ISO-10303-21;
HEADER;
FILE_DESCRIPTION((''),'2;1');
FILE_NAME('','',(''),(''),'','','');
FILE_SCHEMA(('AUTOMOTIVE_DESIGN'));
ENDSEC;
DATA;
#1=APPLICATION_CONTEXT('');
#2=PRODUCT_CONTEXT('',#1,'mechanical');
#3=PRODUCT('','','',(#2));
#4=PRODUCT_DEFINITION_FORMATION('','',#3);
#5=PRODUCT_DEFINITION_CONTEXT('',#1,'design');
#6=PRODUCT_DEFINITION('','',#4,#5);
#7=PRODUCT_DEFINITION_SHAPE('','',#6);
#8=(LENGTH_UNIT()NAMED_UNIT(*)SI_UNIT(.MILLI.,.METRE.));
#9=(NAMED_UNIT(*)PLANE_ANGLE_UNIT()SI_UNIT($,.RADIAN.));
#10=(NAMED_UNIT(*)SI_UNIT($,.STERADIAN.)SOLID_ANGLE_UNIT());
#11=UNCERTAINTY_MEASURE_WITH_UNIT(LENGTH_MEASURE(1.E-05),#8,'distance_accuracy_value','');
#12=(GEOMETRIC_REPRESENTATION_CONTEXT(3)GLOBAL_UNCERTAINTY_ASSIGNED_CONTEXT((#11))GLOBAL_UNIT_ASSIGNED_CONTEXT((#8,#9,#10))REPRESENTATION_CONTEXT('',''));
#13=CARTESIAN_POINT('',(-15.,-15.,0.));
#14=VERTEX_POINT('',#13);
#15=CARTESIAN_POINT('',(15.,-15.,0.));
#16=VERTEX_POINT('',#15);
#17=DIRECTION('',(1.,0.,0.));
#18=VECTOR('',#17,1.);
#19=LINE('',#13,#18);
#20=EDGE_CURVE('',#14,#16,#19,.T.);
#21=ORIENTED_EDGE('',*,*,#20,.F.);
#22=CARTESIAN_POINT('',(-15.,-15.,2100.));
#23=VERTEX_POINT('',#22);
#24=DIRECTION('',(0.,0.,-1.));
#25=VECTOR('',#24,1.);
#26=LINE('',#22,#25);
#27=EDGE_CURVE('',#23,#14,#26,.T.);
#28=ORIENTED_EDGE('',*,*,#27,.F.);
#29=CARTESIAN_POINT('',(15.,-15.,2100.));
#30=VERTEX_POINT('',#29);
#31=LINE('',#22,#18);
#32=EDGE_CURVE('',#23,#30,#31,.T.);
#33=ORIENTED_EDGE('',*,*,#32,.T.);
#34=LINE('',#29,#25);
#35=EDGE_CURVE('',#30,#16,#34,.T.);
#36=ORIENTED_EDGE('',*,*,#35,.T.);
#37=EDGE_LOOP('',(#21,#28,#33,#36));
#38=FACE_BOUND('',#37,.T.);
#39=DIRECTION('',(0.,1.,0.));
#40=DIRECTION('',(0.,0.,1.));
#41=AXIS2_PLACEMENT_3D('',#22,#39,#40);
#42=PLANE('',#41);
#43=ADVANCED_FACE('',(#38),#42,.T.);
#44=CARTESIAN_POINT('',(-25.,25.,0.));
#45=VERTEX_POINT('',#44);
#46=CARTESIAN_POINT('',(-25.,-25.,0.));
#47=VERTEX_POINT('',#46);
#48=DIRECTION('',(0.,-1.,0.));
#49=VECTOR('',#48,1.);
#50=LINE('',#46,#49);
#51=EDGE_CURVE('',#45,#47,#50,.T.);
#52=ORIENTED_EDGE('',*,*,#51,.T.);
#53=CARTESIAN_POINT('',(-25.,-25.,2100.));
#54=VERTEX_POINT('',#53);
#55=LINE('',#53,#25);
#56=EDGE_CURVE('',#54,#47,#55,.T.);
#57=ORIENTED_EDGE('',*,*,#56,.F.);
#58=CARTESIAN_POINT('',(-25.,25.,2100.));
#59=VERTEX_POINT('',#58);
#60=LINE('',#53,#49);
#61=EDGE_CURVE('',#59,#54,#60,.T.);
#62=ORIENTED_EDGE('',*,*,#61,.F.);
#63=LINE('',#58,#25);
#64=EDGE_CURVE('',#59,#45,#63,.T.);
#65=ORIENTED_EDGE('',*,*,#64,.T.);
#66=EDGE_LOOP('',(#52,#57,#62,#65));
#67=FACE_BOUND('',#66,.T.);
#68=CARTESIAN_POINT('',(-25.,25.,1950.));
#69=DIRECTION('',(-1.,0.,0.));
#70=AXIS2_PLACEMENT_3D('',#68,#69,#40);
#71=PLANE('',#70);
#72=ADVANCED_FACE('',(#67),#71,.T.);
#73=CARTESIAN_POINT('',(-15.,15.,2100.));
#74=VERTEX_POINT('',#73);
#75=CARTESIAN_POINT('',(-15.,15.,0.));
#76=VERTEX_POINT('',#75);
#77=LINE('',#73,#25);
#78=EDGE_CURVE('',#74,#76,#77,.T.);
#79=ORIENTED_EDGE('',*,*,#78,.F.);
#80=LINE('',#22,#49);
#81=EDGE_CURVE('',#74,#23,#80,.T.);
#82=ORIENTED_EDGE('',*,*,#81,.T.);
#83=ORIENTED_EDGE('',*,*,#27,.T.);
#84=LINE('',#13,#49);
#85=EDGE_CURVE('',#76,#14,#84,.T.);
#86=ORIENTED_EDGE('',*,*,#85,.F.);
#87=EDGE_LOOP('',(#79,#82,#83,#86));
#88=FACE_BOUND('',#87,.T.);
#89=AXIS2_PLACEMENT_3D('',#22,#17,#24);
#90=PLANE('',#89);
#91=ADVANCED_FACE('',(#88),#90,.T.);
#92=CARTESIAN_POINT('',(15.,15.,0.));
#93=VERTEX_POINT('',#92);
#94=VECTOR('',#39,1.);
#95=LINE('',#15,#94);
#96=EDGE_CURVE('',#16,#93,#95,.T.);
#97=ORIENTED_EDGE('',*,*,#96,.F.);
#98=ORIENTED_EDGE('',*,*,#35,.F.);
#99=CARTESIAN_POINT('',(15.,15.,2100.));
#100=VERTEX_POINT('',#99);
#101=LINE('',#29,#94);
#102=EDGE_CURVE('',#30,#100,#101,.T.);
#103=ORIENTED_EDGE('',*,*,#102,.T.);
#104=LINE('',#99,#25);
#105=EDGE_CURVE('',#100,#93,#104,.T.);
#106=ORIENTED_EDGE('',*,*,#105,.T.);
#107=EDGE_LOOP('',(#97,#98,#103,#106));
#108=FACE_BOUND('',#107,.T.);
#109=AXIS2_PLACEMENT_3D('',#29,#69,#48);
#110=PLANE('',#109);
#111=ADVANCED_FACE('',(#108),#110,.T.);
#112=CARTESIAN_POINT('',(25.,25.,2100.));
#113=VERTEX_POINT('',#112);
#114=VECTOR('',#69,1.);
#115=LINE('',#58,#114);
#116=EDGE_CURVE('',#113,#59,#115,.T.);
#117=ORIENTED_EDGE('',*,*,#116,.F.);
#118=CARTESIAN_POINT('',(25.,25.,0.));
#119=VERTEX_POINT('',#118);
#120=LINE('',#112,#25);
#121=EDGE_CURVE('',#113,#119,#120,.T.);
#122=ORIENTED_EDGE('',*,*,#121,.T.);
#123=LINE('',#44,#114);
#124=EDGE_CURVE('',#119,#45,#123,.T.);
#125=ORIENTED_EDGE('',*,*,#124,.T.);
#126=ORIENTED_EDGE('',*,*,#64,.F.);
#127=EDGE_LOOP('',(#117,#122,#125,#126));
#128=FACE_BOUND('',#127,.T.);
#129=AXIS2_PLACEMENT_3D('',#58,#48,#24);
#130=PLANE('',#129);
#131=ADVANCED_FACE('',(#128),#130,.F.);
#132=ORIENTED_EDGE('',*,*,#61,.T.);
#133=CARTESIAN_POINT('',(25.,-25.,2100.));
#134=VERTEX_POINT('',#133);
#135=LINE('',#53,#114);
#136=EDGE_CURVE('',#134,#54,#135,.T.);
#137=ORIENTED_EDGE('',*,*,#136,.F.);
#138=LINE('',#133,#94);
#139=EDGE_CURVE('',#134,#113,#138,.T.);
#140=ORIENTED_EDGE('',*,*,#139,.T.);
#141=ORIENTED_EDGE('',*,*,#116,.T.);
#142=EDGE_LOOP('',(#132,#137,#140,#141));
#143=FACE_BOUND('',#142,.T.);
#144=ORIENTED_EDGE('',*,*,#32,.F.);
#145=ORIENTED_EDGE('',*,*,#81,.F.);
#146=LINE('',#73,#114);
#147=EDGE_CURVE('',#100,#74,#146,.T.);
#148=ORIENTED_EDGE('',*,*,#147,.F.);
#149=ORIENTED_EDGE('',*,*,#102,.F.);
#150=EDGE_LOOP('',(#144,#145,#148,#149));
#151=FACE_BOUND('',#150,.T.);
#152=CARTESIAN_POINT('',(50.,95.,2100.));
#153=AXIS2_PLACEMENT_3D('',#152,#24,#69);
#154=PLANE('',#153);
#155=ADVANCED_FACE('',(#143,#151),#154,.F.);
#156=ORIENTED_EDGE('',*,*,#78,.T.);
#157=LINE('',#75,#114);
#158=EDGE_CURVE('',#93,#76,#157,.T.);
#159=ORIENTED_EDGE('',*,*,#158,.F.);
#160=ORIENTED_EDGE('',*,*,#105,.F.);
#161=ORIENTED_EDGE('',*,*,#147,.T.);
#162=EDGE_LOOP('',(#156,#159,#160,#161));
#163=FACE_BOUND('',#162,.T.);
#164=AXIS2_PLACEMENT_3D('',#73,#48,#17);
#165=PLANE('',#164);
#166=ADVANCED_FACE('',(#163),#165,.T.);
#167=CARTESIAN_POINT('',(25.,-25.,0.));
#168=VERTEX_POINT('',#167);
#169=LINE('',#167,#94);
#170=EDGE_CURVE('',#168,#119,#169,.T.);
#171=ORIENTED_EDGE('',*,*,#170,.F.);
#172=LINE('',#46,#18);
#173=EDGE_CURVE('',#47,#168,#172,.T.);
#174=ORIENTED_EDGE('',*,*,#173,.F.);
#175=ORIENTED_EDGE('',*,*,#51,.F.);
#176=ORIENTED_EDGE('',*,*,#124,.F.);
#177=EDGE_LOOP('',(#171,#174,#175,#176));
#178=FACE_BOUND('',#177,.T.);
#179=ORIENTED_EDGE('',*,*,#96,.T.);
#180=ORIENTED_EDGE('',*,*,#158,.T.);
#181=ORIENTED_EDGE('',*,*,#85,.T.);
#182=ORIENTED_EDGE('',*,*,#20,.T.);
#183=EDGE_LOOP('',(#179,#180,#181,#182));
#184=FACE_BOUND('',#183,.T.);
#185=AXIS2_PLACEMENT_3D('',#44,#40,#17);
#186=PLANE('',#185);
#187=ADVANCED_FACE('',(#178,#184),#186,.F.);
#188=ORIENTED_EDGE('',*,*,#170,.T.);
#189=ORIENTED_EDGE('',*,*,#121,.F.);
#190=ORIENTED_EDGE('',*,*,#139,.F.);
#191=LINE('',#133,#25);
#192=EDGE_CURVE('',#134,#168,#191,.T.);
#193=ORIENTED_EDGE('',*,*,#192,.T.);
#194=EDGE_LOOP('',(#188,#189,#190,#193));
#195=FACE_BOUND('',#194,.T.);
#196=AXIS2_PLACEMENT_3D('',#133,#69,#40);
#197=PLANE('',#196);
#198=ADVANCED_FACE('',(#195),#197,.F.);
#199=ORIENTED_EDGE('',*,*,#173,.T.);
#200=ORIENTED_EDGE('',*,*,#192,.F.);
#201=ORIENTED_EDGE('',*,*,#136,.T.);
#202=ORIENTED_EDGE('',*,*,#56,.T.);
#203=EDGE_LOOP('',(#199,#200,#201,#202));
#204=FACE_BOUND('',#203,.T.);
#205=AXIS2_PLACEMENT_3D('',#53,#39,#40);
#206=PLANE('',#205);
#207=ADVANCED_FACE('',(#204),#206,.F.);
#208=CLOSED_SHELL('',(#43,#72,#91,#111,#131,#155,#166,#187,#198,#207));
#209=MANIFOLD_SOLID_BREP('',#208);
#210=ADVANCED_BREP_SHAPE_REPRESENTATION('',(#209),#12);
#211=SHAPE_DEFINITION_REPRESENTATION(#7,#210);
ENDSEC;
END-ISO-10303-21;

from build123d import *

# Parameters (mm, degrees)
SKETCH1_W                 = 50
SKETCH1_H                 = 50
SKETCH1_W_2               = 30
SKETCH1_H_2               = 30
BOSS_EXTRUDE1_DEPTH       = 2100
SKETCH2_W                 = 50
SKETCH2_H                 = 50
BOSS_EXTRUDE2_DEPTH       = 5100
SKETCH4_W                 = 50
SKETCH4_H                 = 50
SKETCH4_W_2               = 30
SKETCH4_H_2               = 30
BOSS_EXTRUDE3_DEPTH       = 2100
SKETCH5_W                 = 50
SKETCH5_H                 = 50
BOSS_EXTRUDE4_DEPTH       = 1800
LPATTERN1_COUNT           = 2
LPATTERN1_PITCH           = 2000
SKETCH6_W                 = 100
SKETCH6_H                 = 150
BOSS_EXTRUDE5_DEPTH       = 5
SKETCH7_W                 = 100
SKETCH7_H                 = 150
BOSS_EXTRUDE6_DEPTH       = 5
SKETCH8_W                 = 100
SKETCH8_H                 = 150
BOSS_EXTRUDE7_DEPTH       = 5
SKETCH9_W                 = 100
SKETCH9_H                 = 150
BOSS_EXTRUDE8_DEPTH       = 5
SKETCH10_W                = 100
SKETCH10_H                = 5
BOSS_EXTRUDE9_DEPTH       = 20
SKETCH11_W                = 100
SKETCH11_H                = 5
BOSS_EXTRUDE10_DEPTH      = 20
SKETCH12_W                = 100
SKETCH12_H                = 5
BOSS_EXTRUDE11_DEPTH      = 20
SKETCH13_W                = 100
SKETCH13_H                = 5
BOSS_EXTRUDE12_DEPTH      = 20
F_5_0MM_DOWEL_HOLE1_D     = 5
F_5_0MM_DOWEL_HOLE1_DEPTH = 20
F_5_0MM_DOWEL_HOLE1_TIP   = 1.502151548
F_5_0MM_DOWEL_HOLE2_D     = 5
F_5_0MM_DOWEL_HOLE2_DEPTH = 20
F_5_0MM_DOWEL_HOLE2_TIP   = 1.502151548
F_5_0MM_DOWEL_HOLE3_D     = 5
F_5_0MM_DOWEL_HOLE3_DEPTH = 20
F_5_0MM_DOWEL_HOLE3_TIP   = 1.502151548
F_5_0MM_DOWEL_HOLE4_D     = 5
F_5_0MM_DOWEL_HOLE4_DEPTH = 20
F_5_0MM_DOWEL_HOLE4_TIP   = 1.502151548
SKETCH26_W                = 5305.980467783
SKETCH26_H                = 67.779411833
CUT_EXTRUDE1_DEPTH        = 5613.586302232
SPLIT1_OUTLINE_W          = 5150
SPLIT1_OUTLINE_H          = 50
SPLIT1_OUTLINE_W_2        = 30
SPLIT1_OUTLINE_H_2        = 30
SPLIT1_DEPTH              = 2100
SPLIT1_START              = -5
SPLIT1_2_OUTLINE_W        = 100
SPLIT1_2_OUTLINE_H        = 120
SPLIT1_2_OUTLINE_R        = 2.5
SPLIT1_2_DEPTH            = 2110
SPLIT3_START              = -5
SPLIT3_OUTLINE_W          = 100
SPLIT3_OUTLINE_H          = 120
SPLIT3_OUTLINE_R          = 2.5
SPLIT3_DEPTH              = 5
SPLIT4_START              = 2100
SPLIT4_OUTLINE_W          = 100
SPLIT4_OUTLINE_H          = 120
SPLIT4_OUTLINE_R          = 2.5
SPLIT4_DEPTH              = 5


# Read off the part's stored shape, not the designer's step: Split1, Split3, Split4
with BuildPart() as part:
    # Sketch1 → Boss-Extrude1 (new body)
    with BuildSketch(Plane.XY):
        Rectangle(SKETCH1_W, SKETCH1_H)
        Rectangle(SKETCH1_W_2, SKETCH1_H_2, mode=Mode.SUBTRACT)
    extrude(amount=BOSS_EXTRUDE1_DEPTH)

    # Sketch2 → Boss-Extrude2 (add)
    with BuildSketch(Plane.ZY.offset(25)):
        with Locations((125, 0)):
            Rectangle(SKETCH2_W, SKETCH2_H)
        with Locations((1975, 0)):
            Rectangle(SKETCH2_W, SKETCH2_H)
    extrude(amount=BOSS_EXTRUDE2_DEPTH)

    # Sketch4 → Boss-Extrude3 (add)
    with BuildSketch(Plane.XY):
        with Locations((-5150, 0)):
            Rectangle(SKETCH4_W, SKETCH4_H)
        with Locations((-5150, 0)):
            Rectangle(SKETCH4_W_2, SKETCH4_H_2, mode=Mode.SUBTRACT)
    extrude(amount=BOSS_EXTRUDE3_DEPTH)

    # Sketch5 → Boss-Extrude4 (add)
    with BuildSketch(Plane(origin=(0, 0, 1950), x_dir=(-1, 0, 0), z_dir=(0, 0, -1))):
        with Locations((1550, 0)):
            Rectangle(SKETCH5_W, SKETCH5_H)
    boss_extrude4 = extrude(amount=BOSS_EXTRUDE4_DEPTH)

    # LPattern1: Boss-Extrude4 ×2
    with Locations(*[(-i * LPATTERN1_PITCH, 0, 0) for i in range(1, LPATTERN1_COUNT)]):
        add(boss_extrude4)

    # Sketch6 → Boss-Extrude5 (add)
    with BuildSketch(Plane(origin=(0, 0, 0), x_dir=(-1, 0, 0), z_dir=(0, 0, -1))):
        Rectangle(SKETCH6_W, SKETCH6_H)
    extrude(amount=BOSS_EXTRUDE5_DEPTH)

    # Sketch7 → Boss-Extrude6 (add)
    with BuildSketch(Plane(origin=(0, 0, 0), x_dir=(-1, 0, 0), z_dir=(0, 0, -1))):
        with Locations((5150, 0)):
            Rectangle(SKETCH7_W, SKETCH7_H)
    extrude(amount=BOSS_EXTRUDE6_DEPTH)

    # Sketch8 → Boss-Extrude7 (add)
    with BuildSketch(Plane.XY.offset(2100)):
        with Locations((-5150, 0)):
            Rectangle(SKETCH8_W, SKETCH8_H)
    extrude(amount=BOSS_EXTRUDE7_DEPTH)

    # Sketch9 → Boss-Extrude8 (add)
    with BuildSketch(Plane.XY.offset(2100)):
        Rectangle(SKETCH9_W, SKETCH9_H)
    extrude(amount=BOSS_EXTRUDE8_DEPTH)

    # Sketch10 → Boss-Extrude9 (add)
    with BuildSketch(Plane(origin=(0, 75, 0), x_dir=(1, 0, 0), z_dir=(0, 1, 0))):
        with Locations((0, -2102.5)):
            Rectangle(SKETCH10_W, SKETCH10_H)
    extrude(amount=BOSS_EXTRUDE9_DEPTH)

    # Sketch11 → Boss-Extrude10 (add)
    with BuildSketch(Plane(origin=(0, 75, 0), x_dir=(1, 0, 0), z_dir=(0, 1, 0))):
        with Locations((0, 2.5)):
            Rectangle(SKETCH11_W, SKETCH11_H)
    extrude(amount=BOSS_EXTRUDE10_DEPTH)

    # Sketch12 → Boss-Extrude11 (add)
    with BuildSketch(Plane(origin=(0, 75, 0), x_dir=(1, 0, 0), z_dir=(0, 1, 0))):
        with Locations((-5150, 2.5)):
            Rectangle(SKETCH12_W, SKETCH12_H)
    extrude(amount=BOSS_EXTRUDE11_DEPTH)

    # Sketch13 → Boss-Extrude12 (add)
    with BuildSketch(Plane(origin=(0, 75, 0), x_dir=(1, 0, 0), z_dir=(0, 1, 0))):
        with Locations((-5150, -2102.5)):
            Rectangle(SKETCH13_W, SKETCH13_H)
    extrude(amount=BOSS_EXTRUDE12_DEPTH)

    # Ø5.0mm Dowel Hole1
    with Locations(Plane(origin=(0, 0, -5), x_dir=(-1, 0, 0), z_dir=(0, 0, -1))):
        with Locations((5110, 75), (5190, 75), (5190, -15), (5110, -15)):
            Hole(F_5_0MM_DOWEL_HOLE1_D / 2, depth=F_5_0MM_DOWEL_HOLE1_DEPTH)
            with Locations((0, 0, -(F_5_0MM_DOWEL_HOLE1_DEPTH + F_5_0MM_DOWEL_HOLE1_TIP / 2))):  # 118° drill point
                Cone(0, F_5_0MM_DOWEL_HOLE1_D / 2, F_5_0MM_DOWEL_HOLE1_TIP, mode=Mode.SUBTRACT)

    # Ø5.0mm Dowel Hole2
    with Locations(Plane(origin=(0, 0, -5), x_dir=(-1, 0, 0), z_dir=(0, 0, -1))):
        with Locations((-40, -15), (-40, 75), (40, 75), (40, -15)):
            Hole(F_5_0MM_DOWEL_HOLE2_D / 2, depth=F_5_0MM_DOWEL_HOLE2_DEPTH)
            with Locations((0, 0, -(F_5_0MM_DOWEL_HOLE2_DEPTH + F_5_0MM_DOWEL_HOLE2_TIP / 2))):  # 118° drill point
                Cone(0, F_5_0MM_DOWEL_HOLE2_D / 2, F_5_0MM_DOWEL_HOLE2_TIP, mode=Mode.SUBTRACT)

    # Ø5.0mm Dowel Hole3
    with Locations(Plane.XY.offset(2105)):
        with Locations((-40, -15), (-40, 75), (40, 75), (40, -15)):
            Hole(F_5_0MM_DOWEL_HOLE3_D / 2, depth=F_5_0MM_DOWEL_HOLE3_DEPTH)
            with Locations((0, 0, -(F_5_0MM_DOWEL_HOLE3_DEPTH + F_5_0MM_DOWEL_HOLE3_TIP / 2))):  # 118° drill point
                Cone(0, F_5_0MM_DOWEL_HOLE3_D / 2, F_5_0MM_DOWEL_HOLE3_TIP, mode=Mode.SUBTRACT)

    # Ø5.0mm Dowel Hole4
    with Locations(Plane.XY.offset(2105)):
        with Locations((-5190, 75), (-5110, 75), (-5110, -15), (-5190, -15)):
            Hole(F_5_0MM_DOWEL_HOLE4_D / 2, depth=F_5_0MM_DOWEL_HOLE4_DEPTH)
            with Locations((0, 0, -(F_5_0MM_DOWEL_HOLE4_DEPTH + F_5_0MM_DOWEL_HOLE4_TIP / 2))):  # 118° drill point
                Cone(0, F_5_0MM_DOWEL_HOLE4_D / 2, F_5_0MM_DOWEL_HOLE4_TIP, mode=Mode.SUBTRACT)

    # Sketch26 → Cut-Extrude1 (cut, through all)
    with BuildSketch(Plane.XY.offset(2105)):
        with Locations((-2547.009766109, -58.889705917)):
            Rectangle(SKETCH26_W, SKETCH26_H)
    extrude(amount=-CUT_EXTRUDE1_DEPTH, mode=Mode.SUBTRACT)

    # Split1 outline → Split1 (cut)
    with BuildSketch(Plane.XY):
        with Locations((-2600, 0)):
            Rectangle(SPLIT1_OUTLINE_W, SPLIT1_OUTLINE_H)
        with Locations((-5150, 0)):
            Rectangle(SPLIT1_OUTLINE_W_2, SPLIT1_OUTLINE_H_2, mode=Mode.SUBTRACT)
    extrude(amount=SPLIT1_DEPTH, mode=Mode.SUBTRACT)

    # Split1 2 outline → Split1 2 (cut)
    with BuildSketch(Plane.XY.offset(SPLIT1_START)):
        with Locations((-5150, 35)):
            Rectangle(SPLIT1_2_OUTLINE_W, SPLIT1_2_OUTLINE_H)
        with Locations((-5190, -15)):
            Circle(SPLIT1_2_OUTLINE_R, mode=Mode.SUBTRACT)
        with Locations((-5190, 75)):
            Circle(SPLIT1_2_OUTLINE_R, mode=Mode.SUBTRACT)
        with Locations((-5110, 75)):
            Circle(SPLIT1_2_OUTLINE_R, mode=Mode.SUBTRACT)
        with Locations((-5110, -15)):
            Circle(SPLIT1_2_OUTLINE_R, mode=Mode.SUBTRACT)
    extrude(amount=SPLIT1_2_DEPTH, mode=Mode.SUBTRACT)

    # Split3 outline → Split3 (cut)
    with BuildSketch(Plane.XY.offset(SPLIT3_START)):
        with Locations((0, 35)):
            Rectangle(SPLIT3_OUTLINE_W, SPLIT3_OUTLINE_H)
        with Locations((-40, -15)):
            Circle(SPLIT3_OUTLINE_R, mode=Mode.SUBTRACT)
        with Locations((40, -15)):
            Circle(SPLIT3_OUTLINE_R, mode=Mode.SUBTRACT)
        with Locations((-40, 75)):
            Circle(SPLIT3_OUTLINE_R, mode=Mode.SUBTRACT)
        with Locations((40, 75)):
            Circle(SPLIT3_OUTLINE_R, mode=Mode.SUBTRACT)
    extrude(amount=SPLIT3_DEPTH, mode=Mode.SUBTRACT)

    # Split4 outline → Split4 (cut)
    with BuildSketch(Plane.XY.offset(SPLIT4_START)):
        with Locations((0, 35)):
            Rectangle(SPLIT4_OUTLINE_W, SPLIT4_OUTLINE_H)
        with Locations((-40, -15)):
            Circle(SPLIT4_OUTLINE_R, mode=Mode.SUBTRACT)
        with Locations((40, -15)):
            Circle(SPLIT4_OUTLINE_R, mode=Mode.SUBTRACT)
        with Locations((-40, 75)):
            Circle(SPLIT4_OUTLINE_R, mode=Mode.SUBTRACT)
        with Locations((40, 75)):
            Circle(SPLIT4_OUTLINE_R, mode=Mode.SUBTRACT)
    extrude(amount=SPLIT4_DEPTH, mode=Mode.SUBTRACT)


solid = part.part
